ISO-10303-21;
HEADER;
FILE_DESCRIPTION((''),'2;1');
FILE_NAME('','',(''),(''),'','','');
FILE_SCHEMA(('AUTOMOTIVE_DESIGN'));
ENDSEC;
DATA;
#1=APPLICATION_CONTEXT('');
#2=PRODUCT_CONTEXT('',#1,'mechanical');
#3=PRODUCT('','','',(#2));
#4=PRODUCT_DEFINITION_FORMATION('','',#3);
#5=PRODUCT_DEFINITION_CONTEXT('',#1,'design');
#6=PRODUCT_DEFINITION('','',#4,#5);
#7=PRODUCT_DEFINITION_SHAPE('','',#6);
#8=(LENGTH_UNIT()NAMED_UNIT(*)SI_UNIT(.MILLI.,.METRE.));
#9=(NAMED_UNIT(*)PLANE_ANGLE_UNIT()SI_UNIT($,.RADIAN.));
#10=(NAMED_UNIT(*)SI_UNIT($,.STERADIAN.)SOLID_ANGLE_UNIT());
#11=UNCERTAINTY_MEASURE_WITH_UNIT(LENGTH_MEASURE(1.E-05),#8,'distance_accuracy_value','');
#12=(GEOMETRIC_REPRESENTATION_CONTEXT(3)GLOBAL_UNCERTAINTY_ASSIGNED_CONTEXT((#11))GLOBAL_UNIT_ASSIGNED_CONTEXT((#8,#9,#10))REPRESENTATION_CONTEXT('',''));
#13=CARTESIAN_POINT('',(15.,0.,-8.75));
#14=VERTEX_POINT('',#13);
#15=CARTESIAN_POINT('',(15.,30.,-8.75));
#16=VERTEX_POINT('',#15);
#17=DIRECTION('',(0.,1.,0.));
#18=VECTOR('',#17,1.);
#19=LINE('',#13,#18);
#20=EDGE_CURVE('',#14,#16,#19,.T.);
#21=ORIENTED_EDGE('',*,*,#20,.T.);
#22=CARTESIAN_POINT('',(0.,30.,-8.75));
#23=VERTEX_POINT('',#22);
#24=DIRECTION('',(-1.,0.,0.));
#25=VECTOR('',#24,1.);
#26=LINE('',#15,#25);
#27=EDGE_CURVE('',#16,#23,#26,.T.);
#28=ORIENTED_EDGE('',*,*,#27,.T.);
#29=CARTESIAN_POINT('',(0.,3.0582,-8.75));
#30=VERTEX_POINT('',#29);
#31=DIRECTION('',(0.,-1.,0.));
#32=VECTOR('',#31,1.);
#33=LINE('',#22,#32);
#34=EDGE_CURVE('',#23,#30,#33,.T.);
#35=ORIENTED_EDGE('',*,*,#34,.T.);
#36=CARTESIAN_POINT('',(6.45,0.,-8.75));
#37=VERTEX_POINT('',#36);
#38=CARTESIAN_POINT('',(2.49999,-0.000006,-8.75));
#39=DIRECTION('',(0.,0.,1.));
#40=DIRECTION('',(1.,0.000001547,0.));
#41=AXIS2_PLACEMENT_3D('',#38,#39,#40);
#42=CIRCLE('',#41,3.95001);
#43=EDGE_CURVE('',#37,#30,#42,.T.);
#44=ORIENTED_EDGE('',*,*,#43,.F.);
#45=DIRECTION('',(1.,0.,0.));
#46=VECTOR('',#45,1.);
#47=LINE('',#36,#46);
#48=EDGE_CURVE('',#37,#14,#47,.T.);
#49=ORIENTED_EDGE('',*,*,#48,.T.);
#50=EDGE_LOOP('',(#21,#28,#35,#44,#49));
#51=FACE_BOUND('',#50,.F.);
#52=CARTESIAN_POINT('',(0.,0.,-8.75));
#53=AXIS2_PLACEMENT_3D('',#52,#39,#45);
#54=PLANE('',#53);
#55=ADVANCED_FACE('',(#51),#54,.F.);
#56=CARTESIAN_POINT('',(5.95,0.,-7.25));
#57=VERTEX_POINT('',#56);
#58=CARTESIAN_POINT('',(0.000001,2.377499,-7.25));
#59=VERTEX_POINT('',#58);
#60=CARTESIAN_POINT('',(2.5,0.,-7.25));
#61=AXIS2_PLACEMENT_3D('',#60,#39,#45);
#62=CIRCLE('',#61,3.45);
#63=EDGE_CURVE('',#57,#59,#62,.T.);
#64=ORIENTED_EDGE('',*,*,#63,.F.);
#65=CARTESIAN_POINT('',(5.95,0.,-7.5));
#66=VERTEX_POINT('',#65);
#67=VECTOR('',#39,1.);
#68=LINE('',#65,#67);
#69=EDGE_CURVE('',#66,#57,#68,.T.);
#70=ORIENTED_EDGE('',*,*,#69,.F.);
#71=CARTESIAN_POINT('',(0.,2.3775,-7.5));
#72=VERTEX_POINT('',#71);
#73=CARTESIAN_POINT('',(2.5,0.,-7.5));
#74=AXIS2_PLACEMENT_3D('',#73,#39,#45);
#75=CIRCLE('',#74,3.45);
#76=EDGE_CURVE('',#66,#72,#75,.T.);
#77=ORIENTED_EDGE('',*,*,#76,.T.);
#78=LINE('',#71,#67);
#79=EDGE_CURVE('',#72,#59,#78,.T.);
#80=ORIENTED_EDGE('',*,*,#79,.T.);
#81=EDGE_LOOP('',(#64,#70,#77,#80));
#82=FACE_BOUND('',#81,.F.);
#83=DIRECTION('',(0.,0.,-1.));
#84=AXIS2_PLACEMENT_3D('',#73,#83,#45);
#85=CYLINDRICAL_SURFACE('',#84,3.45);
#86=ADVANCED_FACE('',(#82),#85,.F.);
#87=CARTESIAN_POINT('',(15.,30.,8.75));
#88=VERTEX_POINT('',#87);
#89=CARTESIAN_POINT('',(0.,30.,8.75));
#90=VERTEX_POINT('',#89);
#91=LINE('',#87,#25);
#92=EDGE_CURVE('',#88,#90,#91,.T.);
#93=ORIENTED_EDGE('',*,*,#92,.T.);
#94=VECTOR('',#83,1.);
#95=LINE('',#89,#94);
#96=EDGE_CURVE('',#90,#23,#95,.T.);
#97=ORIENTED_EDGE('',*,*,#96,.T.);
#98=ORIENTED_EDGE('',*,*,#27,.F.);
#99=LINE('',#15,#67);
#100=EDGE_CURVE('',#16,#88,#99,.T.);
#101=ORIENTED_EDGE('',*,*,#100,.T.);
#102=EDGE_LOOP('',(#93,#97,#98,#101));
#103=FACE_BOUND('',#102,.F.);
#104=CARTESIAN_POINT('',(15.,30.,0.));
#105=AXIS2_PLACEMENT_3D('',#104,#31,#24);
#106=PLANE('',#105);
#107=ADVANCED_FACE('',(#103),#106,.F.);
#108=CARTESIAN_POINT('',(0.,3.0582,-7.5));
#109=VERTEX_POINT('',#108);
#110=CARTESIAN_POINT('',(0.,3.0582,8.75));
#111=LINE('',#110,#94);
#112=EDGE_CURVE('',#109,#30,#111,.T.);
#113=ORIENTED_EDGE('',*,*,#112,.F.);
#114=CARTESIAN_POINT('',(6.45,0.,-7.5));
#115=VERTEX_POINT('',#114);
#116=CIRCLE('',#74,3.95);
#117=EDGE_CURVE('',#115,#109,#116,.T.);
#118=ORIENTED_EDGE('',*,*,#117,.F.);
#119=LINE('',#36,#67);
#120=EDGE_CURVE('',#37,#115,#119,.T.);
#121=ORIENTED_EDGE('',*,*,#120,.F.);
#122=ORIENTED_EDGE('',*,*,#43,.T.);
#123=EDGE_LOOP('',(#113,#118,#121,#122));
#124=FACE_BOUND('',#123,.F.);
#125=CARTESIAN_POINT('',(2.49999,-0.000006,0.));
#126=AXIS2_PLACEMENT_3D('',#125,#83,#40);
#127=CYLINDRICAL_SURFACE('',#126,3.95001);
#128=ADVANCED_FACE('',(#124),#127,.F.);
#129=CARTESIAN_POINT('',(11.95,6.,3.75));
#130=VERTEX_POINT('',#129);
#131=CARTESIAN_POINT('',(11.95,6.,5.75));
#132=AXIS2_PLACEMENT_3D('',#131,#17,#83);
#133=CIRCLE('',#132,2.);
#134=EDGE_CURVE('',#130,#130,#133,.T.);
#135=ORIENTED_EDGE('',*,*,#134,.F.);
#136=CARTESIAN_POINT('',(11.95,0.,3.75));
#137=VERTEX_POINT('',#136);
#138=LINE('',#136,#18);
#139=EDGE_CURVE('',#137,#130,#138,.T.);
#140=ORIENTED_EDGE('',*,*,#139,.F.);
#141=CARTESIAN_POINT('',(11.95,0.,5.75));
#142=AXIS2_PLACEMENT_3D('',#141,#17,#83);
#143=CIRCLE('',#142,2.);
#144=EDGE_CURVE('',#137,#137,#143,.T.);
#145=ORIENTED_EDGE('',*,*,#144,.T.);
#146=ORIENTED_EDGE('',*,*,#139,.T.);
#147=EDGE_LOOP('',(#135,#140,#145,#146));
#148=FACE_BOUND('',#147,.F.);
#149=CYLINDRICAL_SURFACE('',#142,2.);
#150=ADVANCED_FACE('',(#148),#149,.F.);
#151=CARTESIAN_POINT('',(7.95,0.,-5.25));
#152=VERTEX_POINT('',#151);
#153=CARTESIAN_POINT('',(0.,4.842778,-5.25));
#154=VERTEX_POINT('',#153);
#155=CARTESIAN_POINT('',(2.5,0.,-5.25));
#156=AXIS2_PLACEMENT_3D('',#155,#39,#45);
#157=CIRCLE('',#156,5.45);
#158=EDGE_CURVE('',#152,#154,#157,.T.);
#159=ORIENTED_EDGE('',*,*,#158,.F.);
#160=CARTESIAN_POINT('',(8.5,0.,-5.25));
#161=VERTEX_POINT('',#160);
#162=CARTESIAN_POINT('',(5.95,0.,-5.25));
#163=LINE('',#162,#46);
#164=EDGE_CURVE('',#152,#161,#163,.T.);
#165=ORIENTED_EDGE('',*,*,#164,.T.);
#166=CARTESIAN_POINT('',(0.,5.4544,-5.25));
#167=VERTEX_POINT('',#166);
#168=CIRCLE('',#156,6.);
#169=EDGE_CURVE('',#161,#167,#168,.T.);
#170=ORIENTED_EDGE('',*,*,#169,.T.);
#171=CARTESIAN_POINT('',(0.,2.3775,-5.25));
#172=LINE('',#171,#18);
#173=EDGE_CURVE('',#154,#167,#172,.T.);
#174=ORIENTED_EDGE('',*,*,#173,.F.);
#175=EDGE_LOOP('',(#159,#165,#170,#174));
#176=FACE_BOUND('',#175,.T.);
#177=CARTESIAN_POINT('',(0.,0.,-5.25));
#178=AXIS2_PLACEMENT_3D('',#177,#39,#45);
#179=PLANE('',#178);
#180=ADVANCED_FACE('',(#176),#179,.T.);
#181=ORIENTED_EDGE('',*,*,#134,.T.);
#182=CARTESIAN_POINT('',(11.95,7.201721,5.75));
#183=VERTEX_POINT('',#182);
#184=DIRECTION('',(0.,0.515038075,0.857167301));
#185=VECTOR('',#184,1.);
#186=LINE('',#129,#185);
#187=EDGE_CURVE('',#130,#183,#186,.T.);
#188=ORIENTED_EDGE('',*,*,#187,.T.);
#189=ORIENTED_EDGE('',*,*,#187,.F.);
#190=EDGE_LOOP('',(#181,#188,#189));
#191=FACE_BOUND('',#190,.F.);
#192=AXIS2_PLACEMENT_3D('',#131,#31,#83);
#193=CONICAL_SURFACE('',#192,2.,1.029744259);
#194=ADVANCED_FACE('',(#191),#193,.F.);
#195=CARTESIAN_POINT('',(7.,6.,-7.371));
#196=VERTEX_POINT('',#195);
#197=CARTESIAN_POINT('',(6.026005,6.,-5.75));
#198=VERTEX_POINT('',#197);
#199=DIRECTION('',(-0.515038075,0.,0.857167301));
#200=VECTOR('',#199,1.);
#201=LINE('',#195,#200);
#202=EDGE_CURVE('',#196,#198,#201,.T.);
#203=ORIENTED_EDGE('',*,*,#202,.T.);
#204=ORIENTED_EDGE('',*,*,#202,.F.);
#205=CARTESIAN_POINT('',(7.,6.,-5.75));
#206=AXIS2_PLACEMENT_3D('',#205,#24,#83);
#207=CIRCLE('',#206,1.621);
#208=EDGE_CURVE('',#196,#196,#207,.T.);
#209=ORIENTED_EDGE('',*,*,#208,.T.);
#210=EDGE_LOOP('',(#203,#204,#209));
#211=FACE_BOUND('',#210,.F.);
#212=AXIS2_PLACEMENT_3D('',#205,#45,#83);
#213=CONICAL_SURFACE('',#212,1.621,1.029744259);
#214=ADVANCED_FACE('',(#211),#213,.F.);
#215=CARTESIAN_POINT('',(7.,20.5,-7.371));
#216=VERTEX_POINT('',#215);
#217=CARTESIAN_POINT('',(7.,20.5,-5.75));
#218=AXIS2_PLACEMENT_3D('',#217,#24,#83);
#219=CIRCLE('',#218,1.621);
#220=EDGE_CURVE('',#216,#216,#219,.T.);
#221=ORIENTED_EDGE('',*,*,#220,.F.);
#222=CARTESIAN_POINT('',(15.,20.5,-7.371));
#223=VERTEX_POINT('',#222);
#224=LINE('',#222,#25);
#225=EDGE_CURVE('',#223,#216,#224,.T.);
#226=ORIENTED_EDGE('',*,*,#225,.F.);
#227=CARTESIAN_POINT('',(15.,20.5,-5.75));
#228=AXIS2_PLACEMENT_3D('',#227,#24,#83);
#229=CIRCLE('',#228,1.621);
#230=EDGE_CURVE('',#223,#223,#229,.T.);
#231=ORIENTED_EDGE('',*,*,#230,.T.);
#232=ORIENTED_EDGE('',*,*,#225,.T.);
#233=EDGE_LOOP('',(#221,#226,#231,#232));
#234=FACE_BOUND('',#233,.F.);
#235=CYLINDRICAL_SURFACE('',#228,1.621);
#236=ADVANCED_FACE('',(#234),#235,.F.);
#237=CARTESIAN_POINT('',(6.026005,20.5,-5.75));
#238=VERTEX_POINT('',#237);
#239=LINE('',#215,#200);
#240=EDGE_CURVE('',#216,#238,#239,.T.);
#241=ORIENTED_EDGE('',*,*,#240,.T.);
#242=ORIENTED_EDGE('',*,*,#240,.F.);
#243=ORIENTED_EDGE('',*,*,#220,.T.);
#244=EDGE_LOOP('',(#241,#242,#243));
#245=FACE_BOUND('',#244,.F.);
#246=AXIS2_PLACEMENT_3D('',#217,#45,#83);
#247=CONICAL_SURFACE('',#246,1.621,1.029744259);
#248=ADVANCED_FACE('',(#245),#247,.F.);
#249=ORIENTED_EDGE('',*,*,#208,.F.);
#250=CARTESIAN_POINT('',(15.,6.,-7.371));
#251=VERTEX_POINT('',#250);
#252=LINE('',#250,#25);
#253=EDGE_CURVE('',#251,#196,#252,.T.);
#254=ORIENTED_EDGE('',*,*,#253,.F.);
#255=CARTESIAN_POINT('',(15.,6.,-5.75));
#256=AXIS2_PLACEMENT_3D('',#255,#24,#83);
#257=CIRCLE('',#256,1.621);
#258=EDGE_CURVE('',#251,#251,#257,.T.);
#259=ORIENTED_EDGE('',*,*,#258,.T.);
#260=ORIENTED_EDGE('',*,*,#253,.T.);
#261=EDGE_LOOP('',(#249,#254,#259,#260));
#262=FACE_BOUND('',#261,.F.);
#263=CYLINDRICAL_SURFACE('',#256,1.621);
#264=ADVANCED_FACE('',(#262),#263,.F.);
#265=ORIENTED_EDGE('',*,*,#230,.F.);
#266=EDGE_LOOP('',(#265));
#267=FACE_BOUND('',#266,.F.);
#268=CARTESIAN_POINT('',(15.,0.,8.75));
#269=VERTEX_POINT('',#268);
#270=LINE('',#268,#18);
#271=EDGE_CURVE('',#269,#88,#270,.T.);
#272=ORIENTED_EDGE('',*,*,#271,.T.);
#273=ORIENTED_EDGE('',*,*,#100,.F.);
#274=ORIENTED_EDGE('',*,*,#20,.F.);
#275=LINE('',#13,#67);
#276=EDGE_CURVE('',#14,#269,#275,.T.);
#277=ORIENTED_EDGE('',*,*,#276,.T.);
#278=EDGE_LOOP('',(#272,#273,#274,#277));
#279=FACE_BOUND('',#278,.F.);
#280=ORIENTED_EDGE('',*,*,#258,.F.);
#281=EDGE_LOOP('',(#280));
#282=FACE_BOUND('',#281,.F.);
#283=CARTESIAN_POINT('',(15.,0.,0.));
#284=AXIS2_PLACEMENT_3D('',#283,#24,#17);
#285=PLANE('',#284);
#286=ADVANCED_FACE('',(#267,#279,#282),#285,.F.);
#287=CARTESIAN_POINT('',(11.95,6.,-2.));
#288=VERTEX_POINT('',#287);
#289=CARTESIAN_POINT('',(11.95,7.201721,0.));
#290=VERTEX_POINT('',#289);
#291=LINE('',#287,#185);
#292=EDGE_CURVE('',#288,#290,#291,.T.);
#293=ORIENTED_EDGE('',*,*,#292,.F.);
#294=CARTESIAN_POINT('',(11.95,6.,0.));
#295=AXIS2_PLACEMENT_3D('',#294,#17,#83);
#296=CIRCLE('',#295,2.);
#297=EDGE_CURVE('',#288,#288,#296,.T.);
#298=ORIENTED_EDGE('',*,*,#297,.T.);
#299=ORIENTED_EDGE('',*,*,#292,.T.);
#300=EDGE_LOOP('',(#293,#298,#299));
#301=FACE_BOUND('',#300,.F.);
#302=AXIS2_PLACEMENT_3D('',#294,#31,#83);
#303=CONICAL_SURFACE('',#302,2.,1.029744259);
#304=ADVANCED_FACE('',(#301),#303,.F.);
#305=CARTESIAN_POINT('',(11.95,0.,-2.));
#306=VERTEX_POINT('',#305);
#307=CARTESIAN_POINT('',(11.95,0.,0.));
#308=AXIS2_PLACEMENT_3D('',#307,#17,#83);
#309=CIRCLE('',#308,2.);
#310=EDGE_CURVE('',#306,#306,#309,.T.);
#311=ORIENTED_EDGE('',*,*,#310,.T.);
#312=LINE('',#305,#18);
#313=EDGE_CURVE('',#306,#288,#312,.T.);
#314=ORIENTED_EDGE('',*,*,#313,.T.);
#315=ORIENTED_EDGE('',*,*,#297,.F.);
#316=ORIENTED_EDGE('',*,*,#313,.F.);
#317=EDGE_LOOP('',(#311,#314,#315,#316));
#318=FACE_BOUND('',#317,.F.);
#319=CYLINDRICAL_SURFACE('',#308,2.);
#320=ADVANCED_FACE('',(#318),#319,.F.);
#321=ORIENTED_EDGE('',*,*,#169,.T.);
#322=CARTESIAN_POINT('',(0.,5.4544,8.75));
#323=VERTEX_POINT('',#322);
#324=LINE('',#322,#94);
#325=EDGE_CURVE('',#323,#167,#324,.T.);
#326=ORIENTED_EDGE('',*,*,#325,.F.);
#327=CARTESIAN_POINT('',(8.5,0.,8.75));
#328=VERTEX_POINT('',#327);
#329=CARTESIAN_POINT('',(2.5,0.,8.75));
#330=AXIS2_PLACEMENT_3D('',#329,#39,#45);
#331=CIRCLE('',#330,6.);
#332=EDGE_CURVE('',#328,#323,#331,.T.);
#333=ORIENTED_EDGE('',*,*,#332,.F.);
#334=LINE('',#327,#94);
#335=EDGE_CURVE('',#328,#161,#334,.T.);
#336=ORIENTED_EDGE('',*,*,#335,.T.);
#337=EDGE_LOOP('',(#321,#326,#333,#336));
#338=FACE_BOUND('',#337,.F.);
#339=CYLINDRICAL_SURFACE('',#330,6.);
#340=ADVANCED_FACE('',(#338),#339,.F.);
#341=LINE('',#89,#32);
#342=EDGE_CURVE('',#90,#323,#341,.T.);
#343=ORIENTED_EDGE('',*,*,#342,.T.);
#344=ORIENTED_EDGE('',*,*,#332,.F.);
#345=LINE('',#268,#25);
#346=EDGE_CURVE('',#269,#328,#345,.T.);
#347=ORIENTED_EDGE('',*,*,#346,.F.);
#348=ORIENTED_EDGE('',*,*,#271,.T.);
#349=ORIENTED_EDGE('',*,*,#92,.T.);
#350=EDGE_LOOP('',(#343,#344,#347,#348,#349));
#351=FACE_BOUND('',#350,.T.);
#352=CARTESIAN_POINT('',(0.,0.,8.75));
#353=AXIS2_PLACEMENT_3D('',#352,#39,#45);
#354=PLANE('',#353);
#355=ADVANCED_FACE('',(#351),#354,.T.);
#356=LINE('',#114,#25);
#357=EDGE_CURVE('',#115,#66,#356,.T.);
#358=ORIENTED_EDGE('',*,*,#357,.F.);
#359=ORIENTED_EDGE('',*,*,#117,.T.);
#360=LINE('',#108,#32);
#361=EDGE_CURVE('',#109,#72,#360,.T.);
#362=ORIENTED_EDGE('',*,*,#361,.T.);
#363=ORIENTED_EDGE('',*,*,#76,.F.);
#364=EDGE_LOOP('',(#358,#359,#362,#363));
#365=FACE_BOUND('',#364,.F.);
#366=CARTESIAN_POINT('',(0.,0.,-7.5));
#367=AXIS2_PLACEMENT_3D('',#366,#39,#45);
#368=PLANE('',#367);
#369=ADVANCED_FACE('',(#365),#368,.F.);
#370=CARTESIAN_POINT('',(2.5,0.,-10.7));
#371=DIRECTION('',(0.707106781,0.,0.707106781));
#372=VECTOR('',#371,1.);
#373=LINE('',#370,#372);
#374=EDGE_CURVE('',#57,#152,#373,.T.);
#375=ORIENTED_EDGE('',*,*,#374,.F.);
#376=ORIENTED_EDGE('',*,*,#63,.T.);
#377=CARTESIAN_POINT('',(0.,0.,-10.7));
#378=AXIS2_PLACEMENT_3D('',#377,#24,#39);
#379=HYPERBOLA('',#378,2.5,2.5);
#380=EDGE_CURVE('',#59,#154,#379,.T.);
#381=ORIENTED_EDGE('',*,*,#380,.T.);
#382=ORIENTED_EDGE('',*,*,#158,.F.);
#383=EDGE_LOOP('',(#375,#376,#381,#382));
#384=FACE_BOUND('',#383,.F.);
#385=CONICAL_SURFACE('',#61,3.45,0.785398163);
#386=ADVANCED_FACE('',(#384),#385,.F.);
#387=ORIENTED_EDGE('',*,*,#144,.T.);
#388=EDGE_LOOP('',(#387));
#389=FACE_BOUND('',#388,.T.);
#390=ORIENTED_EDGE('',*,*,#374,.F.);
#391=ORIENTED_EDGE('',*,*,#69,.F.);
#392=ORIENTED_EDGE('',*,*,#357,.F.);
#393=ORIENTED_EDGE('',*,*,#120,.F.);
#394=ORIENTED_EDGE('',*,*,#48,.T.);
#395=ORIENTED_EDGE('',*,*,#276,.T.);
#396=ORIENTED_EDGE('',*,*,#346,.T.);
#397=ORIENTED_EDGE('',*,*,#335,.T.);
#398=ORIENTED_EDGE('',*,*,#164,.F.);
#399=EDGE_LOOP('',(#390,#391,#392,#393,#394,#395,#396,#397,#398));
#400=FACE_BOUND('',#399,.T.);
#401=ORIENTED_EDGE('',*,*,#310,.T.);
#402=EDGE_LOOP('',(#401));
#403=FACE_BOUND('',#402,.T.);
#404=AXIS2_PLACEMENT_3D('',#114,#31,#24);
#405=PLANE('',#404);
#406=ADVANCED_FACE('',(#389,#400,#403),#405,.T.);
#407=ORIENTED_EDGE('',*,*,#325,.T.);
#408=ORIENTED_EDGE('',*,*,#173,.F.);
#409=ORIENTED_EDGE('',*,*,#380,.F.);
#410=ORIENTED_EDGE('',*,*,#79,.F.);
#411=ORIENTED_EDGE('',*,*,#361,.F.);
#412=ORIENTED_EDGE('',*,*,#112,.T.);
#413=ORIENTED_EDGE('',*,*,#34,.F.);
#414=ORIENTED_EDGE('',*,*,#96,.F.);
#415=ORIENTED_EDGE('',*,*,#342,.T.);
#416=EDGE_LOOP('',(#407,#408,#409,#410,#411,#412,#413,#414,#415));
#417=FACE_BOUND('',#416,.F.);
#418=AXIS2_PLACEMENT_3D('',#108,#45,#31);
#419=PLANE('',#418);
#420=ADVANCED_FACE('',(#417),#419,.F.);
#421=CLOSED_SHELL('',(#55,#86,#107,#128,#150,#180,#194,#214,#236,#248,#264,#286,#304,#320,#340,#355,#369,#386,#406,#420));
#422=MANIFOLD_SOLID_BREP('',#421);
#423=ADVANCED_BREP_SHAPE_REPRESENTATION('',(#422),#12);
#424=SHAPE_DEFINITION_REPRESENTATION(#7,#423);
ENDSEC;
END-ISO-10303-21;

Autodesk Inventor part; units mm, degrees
ref_plane "YZ Plane" through (0, 0, 0) normal (1, 0, 0) x (0, 1, 0)
ref_plane "XZ Plane" through (0, 0, 0) normal (0, 1, 0) x (-1, 0, 0)
sketch "Skizze1" plane through (0, 0, 0) normal (0, 0, 1) x (1, 0, 0)
  line L0 (6.45, 0) -> (15, 0)
  line L1 (15, 0) -> (15, 30)
  line L2 (15, 30) -> (0, 30)
  line L3 (0, 30) -> (0, 3.0582)
  arc A0 (6.45, 0) -> (0, 3.0582) centre (2.5, 0) ccw
  line L4 (-3, 0) -> (18, 0) projected
  line L5 (0, -6) -> (0, 36) projected
  point P0 (0, 0)
  dimension "d0" = 30
  dimension "d1" = 15
  dimension "d2" = 7.9
  dimension "d3" = 2.5
extrude "Extrusion1" add sketch "Skizze1" along normal mid plane 17.5 contours A0 L3 L2 L1 L0
ref_plane "Arbeitsebene1" through (0, 0, -7.5) normal (0, 0, 1) x (1, 0, 0)
sketch "Skizze2" plane through (0, 0, -7.5) normal (0, 0, 1) x (1, 0, 0)
  circle A0 centre (2.5, 0) radius 3.95
  arc A1 (6.45, 0) -> (0, 3.0582) centre (2.5, 0) ccw projected
  circle A2 centre (2.5, 0) radius 3.45
  line L0 (0, 3.0582) -> (0, 2.3775)
  line L1 (15, 0) -> (6.45, 0) projected
  line L2 (6.45, 0) -> (5.95, 0)
  point P0 (0, 0)
  point P1 (0, 3.0582)
  dimension "d7" = 7.9
  dimension "d8" = 6.9
extrude "Extrusion2" add sketch "Skizze2" along normal up to surface (16.25 mm away) contours L2 A2 L0 A0 picked at (6.25, 0.2945)
sketch "Skizze3" plane through (15, 0, 8.75) normal (1, 0, 0) x (0, 0, -1)
  line L0 (17.5, 30) -> (17.5, 0) projected
  line L1 (-3.5, 0) -> (21, 0) projected
  point P0 (8.75, 0)
  point P1 (14.5, 20.5)
  point P2 (14.5, 6)
  dimension "d11" = 3
  dimension "d12" = 3
  dimension "d13" = 6
  dimension "d14" = 14.5
hole "Bohrung1" at (15, 20.5, -5.75) at (15, 6, -5.75) direction (-1, 0, 0) diameter 3.242 depth 8 tip angle 118 thread size "M4x0.7" class "6H" standard "ISO Metric profile"
sketch "Skizze4" plane through (6.45, 0, -8.75) normal (0, -1, 0) x (1, 0, 0)
  line L0 (-9.45, 8.75) -> (11.55, 8.75) projected
  line L1 (8.55, 0) -> (8.55, 17.5) projected
  line L2 (8.55, 17.5) -> (-0.5, 17.5) projected
  line L3 (-6.45, 21) -> (-6.45, -3.5) projected
  point P0 (-6.45, 8.75)
  point P1 (5.5, 14.5)
  point P2 (5.5, 8.75)
  dimension "d24" = 3
  dimension "d35" = 11.95
hole "Bohrung2" at (11.95, 0, 5.75) at (11.95, 0, 0) direction (0, 1, 0) diameter 4 depth 6 tip angle 118
sketch "Skizze5" plane through (0, 0, 8.75) normal (0, 0, 1) x (1, 0, 0)
  circle A0 centre (2.5, 0) radius 6
  arc A1 (5.95, 0) -> (0, 2.3775) centre (2.5, 0) ccw projected
  line L0 (0, 2.3775) -> (0, 5.4544)
  line L1 (5.95, 0) -> (8.5, 0)
  line L2 (15, 0) -> (5.95, 0) projected
  point P0 (0, 0)
  dimension "d32" = 12
extrude "Extrusion3" cut sketch "Skizze5" against normal blind 14 contours L1 A1 L0 A0 picked at (7.6008, 0.4409)
chamfer "Fasen1" distance 2 angle 45 1 edges at (3.7801, 3.2037, -5.25)
sketch "Skizze6" plane through (0, 30, 8.75) normal (0, 1, 0) x (1, 0, 0)
  line L0 (0, 17.5) -> (15, 17.5) projected
  line L1 (0, 17.5) -> (0, 0) projected
  point P0 (0, 8.75)
  point P1 (10, 5)
  point P2 (10, 13)
  point P3 (3, 9)
  dimension "d39" = 4.5
  dimension "d40" = 12.5
  dimension "d41" = 8.5
  dimension "d42" = 10
  dimension "d43" = 3
hole "Bohrung3" [suppressed]
hole "Bohrung4" [suppressed]
equation "\"d0\" = Laenge_Grundkoerper"
equation "\"d1\" = Breite_Grundkoerper"
equation "\"d2\" = D_Scheibe"
equation "\"d3\" = Abstand_D_Scheibe"
equation "\"d4\" = Tiefe_Grundkoerper"
equation "\"d7\" = D_Scheibe"
equation "\"d9\" = Tiefe_Grundkoerper"
equation "\"d11\" = Abstand_Bohrungen_y"
equation "\"d12\" = Abstand_Bohrungen_y"
equation "\"d13\" = Abstand_Bohrungen_x"
equation "\"d14\" = Abstand_Bohrungen"
equation "\"d24\" = Zentrierbohrung_y"
equation "\"d25\" = D_Zentrierbohrung"
equation "\"d30\" = T_Zentrierbohrung"
equation "\"Laenge_Grundkoerper\" = 30"
equation "\"Breite_Grundkoerper\" = 15"
equation "\"D_Scheibe\" = 7.9"
equation "\"Abstand_D_Scheibe\" = 2.5"
equation "\"Abstand_Arbeitsebene\" = 2"
equation "\"Tiefe_Grundkoerper\" = 17.5"
equation "\"Abstand_Bohrungen_y\" = 3"
equation "\"Abstand_Bohrungen_x\" = 6"
equation "\"Abstand_Bohrungen\" = 14.5"
equation "\"Zentrierbohrung_x\" = 6"
equation "\"D_Zentrierbohrung\" = 4"
equation "\"T_Zentrierbohrung\" = 6"
equation "\"Zentrierbohrung_y\" = 3"
properties part number "JH_int_Greiferkoerper"
